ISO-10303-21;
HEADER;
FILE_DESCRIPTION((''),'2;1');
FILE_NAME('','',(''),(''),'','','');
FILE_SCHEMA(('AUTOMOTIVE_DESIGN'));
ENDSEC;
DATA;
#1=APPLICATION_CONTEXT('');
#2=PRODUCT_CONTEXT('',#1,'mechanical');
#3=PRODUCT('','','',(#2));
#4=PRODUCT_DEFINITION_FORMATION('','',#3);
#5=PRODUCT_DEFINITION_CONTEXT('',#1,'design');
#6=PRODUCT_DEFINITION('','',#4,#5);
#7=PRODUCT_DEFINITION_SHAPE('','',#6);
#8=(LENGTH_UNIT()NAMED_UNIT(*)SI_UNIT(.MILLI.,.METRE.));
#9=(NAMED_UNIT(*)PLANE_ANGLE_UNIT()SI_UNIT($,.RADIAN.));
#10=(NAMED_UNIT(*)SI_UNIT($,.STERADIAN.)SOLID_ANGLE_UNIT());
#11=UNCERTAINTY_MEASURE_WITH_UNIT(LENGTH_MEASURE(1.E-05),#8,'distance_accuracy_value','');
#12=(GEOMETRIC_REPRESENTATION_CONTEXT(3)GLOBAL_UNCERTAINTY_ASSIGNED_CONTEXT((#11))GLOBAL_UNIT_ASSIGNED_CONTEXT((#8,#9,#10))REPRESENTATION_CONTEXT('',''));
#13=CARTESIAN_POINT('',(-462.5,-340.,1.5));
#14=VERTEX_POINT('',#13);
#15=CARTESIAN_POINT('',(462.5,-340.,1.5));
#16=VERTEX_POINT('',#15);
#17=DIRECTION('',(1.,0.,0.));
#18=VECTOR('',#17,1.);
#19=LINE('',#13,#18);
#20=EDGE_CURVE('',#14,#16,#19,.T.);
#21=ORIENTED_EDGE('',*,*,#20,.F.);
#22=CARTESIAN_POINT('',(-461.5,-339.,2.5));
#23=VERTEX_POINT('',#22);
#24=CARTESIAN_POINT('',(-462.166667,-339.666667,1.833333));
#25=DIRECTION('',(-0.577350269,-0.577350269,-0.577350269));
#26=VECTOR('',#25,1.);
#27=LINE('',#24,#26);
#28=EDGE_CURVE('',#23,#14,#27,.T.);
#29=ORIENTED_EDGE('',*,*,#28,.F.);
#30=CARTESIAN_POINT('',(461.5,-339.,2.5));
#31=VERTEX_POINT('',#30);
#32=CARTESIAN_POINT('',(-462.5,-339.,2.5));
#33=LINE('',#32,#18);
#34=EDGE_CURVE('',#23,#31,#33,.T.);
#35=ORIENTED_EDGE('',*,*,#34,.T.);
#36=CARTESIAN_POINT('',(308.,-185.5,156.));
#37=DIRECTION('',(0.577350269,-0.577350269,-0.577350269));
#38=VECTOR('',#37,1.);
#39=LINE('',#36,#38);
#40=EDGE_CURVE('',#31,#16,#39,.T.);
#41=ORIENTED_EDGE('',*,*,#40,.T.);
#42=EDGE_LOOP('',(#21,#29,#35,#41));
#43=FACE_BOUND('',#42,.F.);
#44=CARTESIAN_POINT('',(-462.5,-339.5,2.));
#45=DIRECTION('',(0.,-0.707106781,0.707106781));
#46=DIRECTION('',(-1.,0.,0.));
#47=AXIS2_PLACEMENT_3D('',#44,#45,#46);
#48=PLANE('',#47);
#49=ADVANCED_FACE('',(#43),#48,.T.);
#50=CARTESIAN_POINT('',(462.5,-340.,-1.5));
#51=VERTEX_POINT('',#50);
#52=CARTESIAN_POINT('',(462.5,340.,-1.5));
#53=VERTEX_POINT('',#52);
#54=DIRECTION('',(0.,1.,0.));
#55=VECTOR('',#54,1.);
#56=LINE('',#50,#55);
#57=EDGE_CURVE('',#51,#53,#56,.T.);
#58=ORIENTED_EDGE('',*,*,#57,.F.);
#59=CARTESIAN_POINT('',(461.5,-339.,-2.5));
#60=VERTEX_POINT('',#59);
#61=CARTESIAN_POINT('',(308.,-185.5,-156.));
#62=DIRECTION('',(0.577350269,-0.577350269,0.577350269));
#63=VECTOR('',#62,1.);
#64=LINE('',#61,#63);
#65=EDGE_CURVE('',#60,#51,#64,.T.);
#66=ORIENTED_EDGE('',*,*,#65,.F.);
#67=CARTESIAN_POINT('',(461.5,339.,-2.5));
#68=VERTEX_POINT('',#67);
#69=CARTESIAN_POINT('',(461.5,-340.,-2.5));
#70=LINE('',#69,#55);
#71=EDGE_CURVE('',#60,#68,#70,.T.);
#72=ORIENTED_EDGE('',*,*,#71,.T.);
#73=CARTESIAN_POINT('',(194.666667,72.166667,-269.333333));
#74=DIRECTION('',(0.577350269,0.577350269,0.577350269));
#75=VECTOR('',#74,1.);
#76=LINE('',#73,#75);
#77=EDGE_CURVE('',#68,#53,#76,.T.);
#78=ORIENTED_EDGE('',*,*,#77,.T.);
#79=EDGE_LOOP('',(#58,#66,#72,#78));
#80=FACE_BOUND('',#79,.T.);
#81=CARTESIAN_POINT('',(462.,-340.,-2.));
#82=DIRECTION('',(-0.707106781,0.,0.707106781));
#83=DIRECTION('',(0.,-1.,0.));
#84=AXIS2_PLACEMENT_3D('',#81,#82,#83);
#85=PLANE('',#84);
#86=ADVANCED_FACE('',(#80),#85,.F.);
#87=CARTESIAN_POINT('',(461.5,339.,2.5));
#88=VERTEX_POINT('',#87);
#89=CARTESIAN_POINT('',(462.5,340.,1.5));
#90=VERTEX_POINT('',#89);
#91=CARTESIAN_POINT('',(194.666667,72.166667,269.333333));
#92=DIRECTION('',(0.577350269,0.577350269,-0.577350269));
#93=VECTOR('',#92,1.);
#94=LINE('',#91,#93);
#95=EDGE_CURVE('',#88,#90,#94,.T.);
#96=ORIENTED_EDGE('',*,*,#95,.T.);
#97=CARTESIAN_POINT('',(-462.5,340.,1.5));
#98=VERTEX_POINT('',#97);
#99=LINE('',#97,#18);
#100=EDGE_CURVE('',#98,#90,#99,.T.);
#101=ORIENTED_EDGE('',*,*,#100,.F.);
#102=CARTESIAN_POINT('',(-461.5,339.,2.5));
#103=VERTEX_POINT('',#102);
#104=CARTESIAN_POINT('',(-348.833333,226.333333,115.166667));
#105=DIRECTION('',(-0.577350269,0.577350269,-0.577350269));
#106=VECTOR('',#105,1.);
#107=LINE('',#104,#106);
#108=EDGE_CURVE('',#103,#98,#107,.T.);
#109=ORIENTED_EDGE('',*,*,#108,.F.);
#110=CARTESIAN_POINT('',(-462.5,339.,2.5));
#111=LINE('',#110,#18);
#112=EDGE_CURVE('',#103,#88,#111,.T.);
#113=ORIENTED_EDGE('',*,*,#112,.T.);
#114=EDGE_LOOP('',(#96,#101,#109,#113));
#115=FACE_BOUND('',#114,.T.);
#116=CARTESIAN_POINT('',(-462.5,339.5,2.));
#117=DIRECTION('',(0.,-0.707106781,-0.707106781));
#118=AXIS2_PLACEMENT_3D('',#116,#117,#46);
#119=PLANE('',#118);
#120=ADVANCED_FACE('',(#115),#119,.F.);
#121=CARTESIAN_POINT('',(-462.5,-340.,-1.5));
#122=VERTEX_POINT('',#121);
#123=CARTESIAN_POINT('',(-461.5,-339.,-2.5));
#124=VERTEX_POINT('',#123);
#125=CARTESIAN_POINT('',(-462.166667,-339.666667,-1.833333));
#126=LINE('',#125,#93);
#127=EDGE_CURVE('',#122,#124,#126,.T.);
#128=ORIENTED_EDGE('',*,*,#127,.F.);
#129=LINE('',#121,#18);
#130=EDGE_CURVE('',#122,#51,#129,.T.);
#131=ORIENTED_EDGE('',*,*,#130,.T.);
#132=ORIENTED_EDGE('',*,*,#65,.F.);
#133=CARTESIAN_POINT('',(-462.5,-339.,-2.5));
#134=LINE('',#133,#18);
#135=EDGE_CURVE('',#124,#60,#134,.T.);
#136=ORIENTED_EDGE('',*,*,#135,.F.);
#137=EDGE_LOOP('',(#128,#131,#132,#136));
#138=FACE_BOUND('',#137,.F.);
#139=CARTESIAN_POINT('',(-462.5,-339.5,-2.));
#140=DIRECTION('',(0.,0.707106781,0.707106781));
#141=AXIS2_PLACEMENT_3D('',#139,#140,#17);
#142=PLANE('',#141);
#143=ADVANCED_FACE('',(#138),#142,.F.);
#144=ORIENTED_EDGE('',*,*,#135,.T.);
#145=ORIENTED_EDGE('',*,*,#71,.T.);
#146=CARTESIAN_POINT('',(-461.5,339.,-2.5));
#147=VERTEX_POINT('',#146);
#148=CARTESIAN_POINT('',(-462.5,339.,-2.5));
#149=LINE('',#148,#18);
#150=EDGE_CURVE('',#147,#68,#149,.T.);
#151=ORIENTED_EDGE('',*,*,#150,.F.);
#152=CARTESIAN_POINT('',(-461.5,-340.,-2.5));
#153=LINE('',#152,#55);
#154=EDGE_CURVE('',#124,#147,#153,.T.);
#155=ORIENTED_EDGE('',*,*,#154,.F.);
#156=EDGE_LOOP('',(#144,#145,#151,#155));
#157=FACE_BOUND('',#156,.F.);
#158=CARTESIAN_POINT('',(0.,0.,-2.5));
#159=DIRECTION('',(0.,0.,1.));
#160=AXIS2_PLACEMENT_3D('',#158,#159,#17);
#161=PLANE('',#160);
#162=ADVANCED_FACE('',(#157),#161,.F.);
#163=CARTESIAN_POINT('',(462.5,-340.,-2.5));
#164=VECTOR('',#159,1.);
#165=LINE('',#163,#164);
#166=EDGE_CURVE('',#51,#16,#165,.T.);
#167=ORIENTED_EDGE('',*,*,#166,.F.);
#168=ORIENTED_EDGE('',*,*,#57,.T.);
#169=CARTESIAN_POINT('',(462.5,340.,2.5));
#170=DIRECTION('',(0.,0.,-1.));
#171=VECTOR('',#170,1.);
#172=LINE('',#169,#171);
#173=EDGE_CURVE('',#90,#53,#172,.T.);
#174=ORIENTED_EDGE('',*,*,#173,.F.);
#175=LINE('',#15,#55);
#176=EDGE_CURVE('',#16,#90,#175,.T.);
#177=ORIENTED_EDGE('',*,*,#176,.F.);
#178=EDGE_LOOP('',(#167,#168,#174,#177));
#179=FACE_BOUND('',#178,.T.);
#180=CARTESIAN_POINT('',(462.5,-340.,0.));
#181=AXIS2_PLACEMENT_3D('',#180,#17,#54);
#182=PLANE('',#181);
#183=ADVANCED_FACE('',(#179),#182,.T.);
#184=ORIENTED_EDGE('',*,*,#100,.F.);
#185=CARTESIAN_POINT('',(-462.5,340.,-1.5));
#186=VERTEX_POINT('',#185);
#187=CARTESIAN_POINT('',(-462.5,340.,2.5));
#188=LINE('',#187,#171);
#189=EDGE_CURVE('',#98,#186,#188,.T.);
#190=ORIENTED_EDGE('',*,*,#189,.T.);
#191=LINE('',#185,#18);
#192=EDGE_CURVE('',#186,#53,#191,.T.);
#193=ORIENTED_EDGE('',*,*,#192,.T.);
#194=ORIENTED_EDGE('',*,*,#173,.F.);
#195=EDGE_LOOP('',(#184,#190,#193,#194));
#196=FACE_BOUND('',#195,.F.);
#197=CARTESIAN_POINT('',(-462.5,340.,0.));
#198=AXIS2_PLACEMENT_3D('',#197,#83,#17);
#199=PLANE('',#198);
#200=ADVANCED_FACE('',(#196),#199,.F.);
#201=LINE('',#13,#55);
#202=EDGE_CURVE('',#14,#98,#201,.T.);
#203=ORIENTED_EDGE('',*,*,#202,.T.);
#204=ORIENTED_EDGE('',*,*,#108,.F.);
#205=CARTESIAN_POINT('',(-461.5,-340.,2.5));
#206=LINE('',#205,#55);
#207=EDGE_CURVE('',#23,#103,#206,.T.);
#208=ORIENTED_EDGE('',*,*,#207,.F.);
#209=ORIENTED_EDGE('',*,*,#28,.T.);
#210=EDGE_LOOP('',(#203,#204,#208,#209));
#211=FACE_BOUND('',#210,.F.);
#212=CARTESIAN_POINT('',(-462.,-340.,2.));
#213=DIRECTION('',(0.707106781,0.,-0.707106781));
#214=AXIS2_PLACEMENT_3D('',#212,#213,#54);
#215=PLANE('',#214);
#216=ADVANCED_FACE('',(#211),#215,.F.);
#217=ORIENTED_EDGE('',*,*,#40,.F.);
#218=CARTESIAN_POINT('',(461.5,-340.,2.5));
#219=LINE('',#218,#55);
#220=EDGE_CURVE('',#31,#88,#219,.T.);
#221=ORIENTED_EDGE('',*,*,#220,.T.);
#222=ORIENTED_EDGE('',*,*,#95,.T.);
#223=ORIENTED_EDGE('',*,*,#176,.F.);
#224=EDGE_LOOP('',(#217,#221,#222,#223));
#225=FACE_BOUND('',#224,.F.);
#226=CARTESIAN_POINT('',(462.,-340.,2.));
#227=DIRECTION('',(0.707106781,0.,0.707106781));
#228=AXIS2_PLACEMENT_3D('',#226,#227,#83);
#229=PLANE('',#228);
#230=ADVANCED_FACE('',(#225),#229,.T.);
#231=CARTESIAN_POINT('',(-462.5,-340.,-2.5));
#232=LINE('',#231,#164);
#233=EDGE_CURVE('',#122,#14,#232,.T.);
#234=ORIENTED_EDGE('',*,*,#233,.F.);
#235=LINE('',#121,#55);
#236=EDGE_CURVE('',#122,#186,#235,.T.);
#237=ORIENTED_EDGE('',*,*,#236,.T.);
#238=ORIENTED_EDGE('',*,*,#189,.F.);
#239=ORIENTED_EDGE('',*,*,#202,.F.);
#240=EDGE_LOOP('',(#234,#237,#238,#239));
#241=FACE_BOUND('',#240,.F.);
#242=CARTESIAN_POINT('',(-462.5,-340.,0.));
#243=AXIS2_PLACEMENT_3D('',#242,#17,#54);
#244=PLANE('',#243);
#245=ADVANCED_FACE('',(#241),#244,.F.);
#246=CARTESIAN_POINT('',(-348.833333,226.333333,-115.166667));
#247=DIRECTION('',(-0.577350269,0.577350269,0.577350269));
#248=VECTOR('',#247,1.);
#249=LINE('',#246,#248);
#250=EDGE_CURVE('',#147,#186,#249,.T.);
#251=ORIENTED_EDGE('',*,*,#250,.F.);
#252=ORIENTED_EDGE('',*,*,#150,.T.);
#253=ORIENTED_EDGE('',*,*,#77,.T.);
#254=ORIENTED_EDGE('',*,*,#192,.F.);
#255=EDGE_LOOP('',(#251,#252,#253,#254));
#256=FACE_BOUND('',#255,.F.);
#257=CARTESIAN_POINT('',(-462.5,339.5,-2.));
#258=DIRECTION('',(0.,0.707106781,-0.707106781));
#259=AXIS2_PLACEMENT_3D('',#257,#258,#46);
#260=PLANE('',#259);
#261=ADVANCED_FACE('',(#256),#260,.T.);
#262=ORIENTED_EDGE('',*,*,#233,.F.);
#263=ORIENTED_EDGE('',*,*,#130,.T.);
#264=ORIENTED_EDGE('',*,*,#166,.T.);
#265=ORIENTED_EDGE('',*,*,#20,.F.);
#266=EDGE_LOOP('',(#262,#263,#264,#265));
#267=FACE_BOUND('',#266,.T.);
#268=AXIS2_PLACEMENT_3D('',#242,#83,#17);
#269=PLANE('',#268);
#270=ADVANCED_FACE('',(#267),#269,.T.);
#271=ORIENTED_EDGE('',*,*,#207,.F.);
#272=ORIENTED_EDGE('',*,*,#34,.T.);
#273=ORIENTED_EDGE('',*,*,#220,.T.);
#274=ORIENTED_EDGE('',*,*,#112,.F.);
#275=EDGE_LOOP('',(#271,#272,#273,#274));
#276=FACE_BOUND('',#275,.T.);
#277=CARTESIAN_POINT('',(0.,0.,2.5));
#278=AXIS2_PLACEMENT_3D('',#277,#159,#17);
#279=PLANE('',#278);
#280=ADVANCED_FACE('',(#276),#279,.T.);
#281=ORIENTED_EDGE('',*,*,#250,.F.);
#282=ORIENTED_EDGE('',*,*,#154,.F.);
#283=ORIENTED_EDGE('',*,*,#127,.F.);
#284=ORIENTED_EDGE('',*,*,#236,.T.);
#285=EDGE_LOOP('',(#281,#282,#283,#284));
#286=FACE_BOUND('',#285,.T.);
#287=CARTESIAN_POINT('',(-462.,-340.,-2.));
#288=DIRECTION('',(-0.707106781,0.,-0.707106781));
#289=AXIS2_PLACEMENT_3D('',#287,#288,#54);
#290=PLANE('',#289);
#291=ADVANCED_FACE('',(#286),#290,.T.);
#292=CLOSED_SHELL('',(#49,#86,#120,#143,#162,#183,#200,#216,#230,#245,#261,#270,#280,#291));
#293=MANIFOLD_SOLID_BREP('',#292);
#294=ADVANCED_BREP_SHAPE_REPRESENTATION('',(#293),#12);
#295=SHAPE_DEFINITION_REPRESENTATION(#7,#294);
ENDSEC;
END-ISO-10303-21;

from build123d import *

# Parameters (mm, degrees)
F0_W     = 925
F0_H     = 680
F1_DEPTH = 2.5
F2_SIZE  = 1
F3_SIZE  = 1


with BuildPart() as f1:
    # F0 (on Top) → F1 (new body, symmetric)
    with BuildSketch(Plane.XY):
        Rectangle(F0_W, F0_H)
    extrude(amount=F1_DEPTH, both=True)

    # F2
    f2_edges = [f1.edges().sort_by_distance(p)[0] for p in [
        (0, -340, 2.5),
        (462.5, 0, 2.5),
        (0, 340, 2.5),
        (-462.5, 0, 2.5),
    ]]
    chamfer(f2_edges, length=F2_SIZE)

    # F3
    f3_edges = [f1.edges().sort_by_distance(p)[0] for p in [
        (0, 340, -2.5),
        (462.5, 0, -2.5),
        (0, -340, -2.5),
        (-462.5, 0, -2.5),
    ]]
    chamfer(f3_edges, length=F3_SIZE)


solid = f1.part
